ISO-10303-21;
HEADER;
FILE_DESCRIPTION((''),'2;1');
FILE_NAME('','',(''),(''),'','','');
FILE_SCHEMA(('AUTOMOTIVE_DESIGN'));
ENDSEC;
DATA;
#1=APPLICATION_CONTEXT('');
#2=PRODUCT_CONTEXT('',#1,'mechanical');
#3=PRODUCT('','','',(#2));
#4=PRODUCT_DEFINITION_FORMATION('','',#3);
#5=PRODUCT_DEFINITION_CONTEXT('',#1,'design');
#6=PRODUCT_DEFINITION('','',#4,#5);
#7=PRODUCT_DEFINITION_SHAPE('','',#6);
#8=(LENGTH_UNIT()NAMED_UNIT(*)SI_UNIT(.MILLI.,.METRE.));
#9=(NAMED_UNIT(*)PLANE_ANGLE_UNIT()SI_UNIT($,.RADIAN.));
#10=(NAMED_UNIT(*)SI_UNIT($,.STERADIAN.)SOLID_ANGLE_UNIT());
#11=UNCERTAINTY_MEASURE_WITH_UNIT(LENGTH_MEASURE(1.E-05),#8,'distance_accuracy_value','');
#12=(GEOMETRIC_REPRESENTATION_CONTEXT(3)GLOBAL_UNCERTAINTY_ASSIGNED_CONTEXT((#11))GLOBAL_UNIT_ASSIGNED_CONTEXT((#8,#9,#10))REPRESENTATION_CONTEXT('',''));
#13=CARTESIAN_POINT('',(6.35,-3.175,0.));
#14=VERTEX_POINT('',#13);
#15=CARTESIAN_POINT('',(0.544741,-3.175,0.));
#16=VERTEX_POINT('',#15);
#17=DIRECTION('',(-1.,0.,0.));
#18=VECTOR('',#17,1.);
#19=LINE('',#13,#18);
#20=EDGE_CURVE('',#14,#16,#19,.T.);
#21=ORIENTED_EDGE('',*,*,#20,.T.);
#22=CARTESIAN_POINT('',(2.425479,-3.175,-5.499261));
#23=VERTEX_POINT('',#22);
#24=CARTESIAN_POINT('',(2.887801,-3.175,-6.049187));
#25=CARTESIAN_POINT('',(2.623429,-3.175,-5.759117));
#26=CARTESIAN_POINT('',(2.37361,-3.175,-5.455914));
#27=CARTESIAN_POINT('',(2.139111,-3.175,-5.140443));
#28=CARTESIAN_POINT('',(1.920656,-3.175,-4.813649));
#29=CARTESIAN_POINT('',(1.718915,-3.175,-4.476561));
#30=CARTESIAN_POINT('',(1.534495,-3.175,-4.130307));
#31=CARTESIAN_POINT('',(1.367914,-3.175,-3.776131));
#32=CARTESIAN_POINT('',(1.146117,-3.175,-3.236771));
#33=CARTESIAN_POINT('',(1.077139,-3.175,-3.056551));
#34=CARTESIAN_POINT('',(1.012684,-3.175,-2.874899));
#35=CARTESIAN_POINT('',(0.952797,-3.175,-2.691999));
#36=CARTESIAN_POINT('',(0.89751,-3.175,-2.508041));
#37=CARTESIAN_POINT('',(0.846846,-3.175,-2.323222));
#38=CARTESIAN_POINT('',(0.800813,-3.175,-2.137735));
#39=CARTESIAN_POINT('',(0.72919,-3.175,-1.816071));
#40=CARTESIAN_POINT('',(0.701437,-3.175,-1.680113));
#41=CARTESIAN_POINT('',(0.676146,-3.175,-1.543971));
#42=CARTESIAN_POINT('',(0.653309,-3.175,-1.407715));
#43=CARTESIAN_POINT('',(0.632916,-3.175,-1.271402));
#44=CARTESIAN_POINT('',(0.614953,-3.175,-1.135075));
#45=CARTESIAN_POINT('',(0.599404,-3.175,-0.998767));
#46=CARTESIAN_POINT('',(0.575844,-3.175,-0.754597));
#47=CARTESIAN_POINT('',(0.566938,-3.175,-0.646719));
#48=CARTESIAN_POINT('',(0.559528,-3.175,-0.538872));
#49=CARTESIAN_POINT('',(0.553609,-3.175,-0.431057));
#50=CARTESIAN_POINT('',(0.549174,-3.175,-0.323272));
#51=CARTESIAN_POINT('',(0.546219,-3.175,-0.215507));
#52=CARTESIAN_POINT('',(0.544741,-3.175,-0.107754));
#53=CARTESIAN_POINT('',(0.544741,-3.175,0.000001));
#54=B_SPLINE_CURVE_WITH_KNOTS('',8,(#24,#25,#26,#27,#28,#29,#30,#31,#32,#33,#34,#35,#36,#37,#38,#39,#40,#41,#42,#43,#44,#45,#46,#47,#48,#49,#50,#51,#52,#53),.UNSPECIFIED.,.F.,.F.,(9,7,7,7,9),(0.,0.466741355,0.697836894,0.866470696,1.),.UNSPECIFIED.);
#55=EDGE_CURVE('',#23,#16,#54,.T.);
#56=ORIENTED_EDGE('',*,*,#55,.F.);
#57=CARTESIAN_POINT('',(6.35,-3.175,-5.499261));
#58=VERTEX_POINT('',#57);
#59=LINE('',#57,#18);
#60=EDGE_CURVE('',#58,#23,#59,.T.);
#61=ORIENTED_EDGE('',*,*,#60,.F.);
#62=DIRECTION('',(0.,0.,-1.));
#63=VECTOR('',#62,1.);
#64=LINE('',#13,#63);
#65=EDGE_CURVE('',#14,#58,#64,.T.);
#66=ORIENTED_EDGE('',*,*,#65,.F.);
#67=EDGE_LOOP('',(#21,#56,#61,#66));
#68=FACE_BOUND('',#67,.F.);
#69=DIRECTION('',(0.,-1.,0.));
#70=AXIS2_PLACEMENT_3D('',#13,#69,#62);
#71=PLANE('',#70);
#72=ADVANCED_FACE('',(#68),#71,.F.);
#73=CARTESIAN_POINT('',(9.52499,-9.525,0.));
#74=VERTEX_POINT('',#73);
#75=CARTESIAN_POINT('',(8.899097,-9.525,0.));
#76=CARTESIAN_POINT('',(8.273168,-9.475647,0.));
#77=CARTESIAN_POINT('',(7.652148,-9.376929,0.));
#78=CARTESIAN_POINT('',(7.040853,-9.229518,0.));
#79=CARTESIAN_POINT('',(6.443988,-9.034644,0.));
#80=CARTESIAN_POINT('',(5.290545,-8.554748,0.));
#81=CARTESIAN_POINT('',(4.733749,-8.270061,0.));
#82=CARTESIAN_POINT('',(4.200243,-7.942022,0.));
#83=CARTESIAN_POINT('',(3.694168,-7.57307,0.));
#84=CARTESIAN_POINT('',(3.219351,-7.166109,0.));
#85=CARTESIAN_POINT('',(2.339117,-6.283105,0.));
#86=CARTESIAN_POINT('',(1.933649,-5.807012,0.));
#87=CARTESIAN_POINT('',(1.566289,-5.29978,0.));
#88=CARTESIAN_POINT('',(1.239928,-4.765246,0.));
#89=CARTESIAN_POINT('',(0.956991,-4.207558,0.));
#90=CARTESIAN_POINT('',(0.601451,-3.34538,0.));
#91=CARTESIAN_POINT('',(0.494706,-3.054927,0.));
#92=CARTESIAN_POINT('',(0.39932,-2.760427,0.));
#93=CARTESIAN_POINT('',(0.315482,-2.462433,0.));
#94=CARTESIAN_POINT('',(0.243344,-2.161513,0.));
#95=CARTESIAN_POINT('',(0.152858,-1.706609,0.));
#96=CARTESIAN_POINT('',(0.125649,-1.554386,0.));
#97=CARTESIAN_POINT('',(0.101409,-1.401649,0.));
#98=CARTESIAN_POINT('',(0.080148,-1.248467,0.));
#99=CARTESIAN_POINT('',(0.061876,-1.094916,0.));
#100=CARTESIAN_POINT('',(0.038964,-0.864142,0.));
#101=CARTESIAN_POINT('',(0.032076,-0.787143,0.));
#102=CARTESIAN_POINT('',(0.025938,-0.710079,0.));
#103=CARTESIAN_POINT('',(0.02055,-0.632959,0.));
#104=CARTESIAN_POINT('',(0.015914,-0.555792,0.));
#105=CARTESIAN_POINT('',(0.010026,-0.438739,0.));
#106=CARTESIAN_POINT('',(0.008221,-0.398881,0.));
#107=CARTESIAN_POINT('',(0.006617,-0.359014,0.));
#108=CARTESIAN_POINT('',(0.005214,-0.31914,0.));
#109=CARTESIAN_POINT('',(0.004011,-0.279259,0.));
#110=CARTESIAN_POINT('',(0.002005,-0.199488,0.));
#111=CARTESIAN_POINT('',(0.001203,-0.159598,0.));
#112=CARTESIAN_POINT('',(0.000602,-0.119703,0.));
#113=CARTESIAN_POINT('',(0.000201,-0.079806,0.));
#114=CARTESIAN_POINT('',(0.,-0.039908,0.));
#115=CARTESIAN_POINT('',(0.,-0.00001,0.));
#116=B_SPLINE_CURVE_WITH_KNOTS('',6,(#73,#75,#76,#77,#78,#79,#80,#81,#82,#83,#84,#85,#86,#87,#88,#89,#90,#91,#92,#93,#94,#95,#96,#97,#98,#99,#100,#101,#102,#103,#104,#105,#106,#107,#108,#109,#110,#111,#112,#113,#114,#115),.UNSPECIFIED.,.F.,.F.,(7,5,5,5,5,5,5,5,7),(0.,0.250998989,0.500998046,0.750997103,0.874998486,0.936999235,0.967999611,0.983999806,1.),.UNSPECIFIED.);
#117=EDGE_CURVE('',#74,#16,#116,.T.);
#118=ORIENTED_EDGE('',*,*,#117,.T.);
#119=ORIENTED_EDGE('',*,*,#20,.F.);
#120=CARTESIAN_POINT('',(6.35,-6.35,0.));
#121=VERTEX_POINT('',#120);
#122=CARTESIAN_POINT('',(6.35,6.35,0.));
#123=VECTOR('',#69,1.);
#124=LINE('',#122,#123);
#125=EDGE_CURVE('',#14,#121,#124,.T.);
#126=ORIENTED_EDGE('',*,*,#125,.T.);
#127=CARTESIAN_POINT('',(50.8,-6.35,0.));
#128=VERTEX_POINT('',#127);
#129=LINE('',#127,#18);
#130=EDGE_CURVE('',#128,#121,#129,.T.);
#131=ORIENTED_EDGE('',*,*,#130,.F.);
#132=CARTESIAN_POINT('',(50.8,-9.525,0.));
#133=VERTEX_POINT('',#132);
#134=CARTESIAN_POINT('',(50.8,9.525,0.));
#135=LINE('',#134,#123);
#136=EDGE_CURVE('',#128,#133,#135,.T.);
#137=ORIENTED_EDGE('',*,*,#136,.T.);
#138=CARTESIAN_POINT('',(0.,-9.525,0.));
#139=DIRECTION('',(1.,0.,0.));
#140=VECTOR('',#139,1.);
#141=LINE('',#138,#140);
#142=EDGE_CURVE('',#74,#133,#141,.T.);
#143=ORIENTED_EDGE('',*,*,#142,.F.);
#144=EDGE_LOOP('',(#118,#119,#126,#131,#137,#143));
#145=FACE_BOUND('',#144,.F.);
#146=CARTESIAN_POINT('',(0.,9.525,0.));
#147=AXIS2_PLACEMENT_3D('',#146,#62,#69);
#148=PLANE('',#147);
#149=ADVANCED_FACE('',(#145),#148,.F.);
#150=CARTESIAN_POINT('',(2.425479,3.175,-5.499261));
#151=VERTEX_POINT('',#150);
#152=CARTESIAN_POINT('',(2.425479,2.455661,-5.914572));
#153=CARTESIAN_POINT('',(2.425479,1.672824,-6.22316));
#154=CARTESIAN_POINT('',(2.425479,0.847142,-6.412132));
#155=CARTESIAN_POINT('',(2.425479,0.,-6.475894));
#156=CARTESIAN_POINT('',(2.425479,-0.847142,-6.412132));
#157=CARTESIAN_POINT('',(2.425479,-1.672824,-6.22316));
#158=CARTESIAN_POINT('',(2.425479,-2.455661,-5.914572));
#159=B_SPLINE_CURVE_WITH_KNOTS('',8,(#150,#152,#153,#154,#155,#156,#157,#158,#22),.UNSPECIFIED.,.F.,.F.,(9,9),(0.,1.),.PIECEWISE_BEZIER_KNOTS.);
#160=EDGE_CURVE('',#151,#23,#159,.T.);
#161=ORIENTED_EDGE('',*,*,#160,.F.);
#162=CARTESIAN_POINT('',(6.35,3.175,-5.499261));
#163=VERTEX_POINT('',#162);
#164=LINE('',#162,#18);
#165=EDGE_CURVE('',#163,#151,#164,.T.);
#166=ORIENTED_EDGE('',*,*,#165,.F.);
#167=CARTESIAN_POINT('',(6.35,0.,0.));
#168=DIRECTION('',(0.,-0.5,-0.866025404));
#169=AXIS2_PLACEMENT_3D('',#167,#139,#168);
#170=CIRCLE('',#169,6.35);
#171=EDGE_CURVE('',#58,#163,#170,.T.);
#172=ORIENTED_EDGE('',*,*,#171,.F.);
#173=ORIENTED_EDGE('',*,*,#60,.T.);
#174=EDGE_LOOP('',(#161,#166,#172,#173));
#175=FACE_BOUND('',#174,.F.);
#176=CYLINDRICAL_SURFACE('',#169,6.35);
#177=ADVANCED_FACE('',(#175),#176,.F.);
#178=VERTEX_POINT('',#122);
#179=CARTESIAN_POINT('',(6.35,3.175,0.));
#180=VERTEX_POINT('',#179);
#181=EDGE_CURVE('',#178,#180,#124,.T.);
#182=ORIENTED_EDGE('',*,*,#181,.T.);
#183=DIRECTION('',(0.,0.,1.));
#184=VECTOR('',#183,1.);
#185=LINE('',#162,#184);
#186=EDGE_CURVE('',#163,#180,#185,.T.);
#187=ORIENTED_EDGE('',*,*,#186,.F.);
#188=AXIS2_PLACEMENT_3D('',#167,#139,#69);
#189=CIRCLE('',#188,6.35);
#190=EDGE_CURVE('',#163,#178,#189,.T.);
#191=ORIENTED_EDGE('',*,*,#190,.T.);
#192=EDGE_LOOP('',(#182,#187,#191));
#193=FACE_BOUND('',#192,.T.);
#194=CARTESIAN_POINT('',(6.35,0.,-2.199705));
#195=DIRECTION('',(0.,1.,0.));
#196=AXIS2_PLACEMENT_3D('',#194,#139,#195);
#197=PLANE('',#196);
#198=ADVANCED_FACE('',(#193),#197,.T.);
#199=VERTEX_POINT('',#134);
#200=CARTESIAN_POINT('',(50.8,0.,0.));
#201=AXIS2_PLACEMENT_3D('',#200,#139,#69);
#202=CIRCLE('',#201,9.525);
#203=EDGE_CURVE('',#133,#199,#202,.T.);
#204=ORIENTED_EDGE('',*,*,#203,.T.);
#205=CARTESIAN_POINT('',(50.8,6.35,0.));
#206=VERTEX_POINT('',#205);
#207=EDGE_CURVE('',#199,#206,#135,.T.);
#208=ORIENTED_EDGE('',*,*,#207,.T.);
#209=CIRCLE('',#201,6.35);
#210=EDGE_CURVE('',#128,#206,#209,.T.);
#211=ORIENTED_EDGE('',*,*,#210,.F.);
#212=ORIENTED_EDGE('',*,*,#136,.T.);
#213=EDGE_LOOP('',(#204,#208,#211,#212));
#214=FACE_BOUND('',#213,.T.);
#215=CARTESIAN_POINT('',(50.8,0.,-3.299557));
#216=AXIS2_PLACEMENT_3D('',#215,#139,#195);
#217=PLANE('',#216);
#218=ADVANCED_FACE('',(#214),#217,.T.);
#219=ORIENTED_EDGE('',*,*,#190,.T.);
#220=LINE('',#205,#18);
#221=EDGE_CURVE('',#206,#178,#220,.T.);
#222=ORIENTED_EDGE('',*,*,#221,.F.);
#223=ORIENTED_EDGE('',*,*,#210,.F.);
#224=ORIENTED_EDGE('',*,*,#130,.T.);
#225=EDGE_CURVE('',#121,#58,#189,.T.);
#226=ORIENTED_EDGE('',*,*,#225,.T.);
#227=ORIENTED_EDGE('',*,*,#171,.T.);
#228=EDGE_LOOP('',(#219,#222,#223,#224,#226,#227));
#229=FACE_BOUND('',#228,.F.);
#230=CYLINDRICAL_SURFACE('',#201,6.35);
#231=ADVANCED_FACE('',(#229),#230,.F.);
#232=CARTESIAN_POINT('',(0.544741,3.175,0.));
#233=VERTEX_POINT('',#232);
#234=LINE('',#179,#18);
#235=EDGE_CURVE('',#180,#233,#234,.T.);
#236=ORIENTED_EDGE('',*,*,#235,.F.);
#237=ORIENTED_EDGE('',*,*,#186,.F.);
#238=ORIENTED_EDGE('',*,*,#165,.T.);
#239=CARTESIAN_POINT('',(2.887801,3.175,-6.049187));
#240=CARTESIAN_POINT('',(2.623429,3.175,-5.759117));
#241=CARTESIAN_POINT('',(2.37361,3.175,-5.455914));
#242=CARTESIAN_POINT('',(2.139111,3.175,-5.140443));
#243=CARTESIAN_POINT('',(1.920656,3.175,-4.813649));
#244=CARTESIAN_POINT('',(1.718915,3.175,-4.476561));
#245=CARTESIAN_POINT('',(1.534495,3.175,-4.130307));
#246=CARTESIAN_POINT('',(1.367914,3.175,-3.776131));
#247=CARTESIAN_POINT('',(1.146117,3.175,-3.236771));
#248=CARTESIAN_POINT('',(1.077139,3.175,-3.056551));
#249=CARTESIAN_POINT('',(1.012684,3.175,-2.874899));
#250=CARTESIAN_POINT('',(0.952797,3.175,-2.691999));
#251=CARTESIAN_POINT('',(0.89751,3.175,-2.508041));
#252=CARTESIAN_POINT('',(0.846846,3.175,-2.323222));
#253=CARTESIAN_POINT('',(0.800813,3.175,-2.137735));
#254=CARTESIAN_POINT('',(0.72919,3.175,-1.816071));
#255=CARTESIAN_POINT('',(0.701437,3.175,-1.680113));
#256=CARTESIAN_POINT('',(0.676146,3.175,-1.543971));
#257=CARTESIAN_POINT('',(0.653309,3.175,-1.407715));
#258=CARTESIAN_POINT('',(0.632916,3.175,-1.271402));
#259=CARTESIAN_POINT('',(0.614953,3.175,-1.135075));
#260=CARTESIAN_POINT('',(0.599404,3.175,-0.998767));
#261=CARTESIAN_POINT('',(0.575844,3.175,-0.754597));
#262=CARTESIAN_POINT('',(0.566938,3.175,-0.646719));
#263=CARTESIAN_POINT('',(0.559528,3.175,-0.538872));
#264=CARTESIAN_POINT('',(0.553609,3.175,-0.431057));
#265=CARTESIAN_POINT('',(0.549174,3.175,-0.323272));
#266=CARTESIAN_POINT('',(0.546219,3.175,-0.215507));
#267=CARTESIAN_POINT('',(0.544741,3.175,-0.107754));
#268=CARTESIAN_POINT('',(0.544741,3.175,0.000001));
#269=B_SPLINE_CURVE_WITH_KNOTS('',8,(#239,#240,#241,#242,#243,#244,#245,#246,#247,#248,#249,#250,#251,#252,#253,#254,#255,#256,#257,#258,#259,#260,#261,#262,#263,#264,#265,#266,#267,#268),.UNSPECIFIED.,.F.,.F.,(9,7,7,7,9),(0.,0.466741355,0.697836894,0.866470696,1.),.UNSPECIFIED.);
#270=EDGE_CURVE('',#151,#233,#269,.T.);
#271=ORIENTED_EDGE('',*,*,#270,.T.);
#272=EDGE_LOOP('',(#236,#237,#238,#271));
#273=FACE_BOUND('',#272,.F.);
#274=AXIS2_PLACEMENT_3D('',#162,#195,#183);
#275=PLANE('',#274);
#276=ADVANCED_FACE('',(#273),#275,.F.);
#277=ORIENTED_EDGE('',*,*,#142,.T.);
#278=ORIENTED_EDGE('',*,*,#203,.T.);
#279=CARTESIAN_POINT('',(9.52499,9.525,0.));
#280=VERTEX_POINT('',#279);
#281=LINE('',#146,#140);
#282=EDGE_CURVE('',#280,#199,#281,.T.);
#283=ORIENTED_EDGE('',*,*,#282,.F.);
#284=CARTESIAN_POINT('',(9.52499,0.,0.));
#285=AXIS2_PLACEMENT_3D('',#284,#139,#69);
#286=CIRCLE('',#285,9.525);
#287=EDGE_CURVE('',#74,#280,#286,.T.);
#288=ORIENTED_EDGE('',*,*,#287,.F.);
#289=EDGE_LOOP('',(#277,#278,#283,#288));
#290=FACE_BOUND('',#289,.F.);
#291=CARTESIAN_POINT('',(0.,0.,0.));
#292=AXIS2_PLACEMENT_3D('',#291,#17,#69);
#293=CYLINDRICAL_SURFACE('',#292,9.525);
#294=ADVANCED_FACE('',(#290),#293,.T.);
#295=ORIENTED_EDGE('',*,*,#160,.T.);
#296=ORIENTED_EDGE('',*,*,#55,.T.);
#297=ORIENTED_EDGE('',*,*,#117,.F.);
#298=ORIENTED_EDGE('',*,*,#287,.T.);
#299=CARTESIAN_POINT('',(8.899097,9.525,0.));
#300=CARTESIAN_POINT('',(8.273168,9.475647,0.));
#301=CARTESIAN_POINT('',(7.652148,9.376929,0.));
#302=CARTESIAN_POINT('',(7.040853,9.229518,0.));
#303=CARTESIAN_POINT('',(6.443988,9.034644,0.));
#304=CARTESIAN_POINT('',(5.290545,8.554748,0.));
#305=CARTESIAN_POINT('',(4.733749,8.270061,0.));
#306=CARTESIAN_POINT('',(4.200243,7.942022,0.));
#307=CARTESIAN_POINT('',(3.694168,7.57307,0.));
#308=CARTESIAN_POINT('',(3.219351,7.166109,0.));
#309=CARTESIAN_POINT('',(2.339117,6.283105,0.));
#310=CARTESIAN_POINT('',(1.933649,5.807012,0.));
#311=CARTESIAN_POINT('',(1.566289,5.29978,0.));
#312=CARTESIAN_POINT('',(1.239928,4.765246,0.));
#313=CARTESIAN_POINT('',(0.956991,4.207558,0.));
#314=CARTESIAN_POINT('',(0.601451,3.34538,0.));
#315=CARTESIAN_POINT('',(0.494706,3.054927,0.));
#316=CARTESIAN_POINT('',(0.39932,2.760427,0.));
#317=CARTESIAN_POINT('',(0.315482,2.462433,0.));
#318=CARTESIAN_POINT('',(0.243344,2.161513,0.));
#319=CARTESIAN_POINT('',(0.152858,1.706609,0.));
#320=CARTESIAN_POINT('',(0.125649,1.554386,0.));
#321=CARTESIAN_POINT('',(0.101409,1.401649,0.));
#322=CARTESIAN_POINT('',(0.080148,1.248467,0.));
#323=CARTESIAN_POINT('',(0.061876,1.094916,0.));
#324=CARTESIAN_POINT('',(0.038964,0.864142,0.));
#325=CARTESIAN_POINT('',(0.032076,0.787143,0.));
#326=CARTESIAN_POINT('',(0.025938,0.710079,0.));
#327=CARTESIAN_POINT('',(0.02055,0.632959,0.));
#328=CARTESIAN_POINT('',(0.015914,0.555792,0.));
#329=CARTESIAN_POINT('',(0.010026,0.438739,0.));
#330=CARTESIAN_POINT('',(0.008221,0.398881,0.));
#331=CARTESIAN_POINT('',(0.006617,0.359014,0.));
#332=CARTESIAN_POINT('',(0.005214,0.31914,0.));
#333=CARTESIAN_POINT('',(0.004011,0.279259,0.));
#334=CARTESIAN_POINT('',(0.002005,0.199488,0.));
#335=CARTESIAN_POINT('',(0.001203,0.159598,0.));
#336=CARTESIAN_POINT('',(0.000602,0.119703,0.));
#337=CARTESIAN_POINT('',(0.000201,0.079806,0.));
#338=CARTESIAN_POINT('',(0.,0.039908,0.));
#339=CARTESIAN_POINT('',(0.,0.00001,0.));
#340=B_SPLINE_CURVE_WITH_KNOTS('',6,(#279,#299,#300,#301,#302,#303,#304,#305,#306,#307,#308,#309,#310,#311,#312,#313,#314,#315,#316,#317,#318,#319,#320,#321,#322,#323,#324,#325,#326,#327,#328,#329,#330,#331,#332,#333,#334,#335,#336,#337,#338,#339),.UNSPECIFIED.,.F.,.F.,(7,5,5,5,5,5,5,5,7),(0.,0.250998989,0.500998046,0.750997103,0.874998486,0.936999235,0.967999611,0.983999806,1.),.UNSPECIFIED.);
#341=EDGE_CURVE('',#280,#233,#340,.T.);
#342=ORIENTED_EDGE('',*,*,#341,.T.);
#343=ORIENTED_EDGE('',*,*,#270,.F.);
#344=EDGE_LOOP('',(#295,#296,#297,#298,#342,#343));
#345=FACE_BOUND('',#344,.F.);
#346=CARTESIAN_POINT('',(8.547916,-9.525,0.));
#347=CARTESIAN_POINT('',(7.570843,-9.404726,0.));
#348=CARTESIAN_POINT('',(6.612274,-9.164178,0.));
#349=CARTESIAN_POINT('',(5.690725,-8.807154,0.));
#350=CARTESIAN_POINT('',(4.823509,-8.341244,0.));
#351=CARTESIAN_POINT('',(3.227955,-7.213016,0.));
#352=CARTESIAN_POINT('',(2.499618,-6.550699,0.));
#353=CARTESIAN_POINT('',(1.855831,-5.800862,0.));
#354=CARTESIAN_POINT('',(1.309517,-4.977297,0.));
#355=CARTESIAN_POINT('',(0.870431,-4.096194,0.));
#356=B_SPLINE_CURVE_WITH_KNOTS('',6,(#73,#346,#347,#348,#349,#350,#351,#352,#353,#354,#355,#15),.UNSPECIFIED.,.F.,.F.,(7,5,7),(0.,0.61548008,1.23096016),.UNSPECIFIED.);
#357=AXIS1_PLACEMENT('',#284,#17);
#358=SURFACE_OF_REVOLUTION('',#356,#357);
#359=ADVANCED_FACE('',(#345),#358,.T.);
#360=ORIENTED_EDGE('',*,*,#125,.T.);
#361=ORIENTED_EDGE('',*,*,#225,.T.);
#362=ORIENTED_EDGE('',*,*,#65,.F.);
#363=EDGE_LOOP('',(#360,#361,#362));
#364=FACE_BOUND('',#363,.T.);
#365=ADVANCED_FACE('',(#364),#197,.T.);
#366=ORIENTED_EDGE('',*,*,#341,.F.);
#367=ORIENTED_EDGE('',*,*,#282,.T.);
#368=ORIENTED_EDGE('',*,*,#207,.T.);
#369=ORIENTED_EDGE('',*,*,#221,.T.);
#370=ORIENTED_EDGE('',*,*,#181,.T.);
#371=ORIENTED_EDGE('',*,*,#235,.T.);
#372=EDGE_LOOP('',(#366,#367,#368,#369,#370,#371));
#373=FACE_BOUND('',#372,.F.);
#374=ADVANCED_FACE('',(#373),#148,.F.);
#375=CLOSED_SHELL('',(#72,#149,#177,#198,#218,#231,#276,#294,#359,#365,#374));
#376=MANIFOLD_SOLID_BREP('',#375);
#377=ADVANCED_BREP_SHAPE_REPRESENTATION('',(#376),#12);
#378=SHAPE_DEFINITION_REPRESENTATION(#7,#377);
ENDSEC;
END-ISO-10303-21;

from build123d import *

# Parameters (mm, degrees)
F1_DEPTH = 50.8
F2_R     = 9.52499
F4_DEPTH = 44.45
F6_DEPTH = 6.35


# Not quite as in the source:
# - a fillet or chamfer is up to 0.001 mm smaller than in the source, because OpenCascade refuses the exact size


with BuildPart() as f1:
    # F0 (on Right) → F1 (new body)
    with BuildSketch(Plane.YZ):
        with BuildLine():
            Line((9.525, 0), (-9.525, 0))
            ThreePointArc((-9.525, 0), (0, -9.525), (9.525, 0))
        make_face()
    extrude(amount=F1_DEPTH)

    # F2 (radius 9.525 in the source; OpenCascade refuses exactly that, so slightly less here)
    f2_edges = [f1.edges().sort_by_distance(p)[0] for p in [
        (0, 0, -9.525),
    ]]
    fillet(f2_edges, radius=F2_R)

    # F3 (on face) → F4 (cut)
    with BuildSketch(Plane.YZ.offset(50.8)):
        with BuildLine():
            Line((6.35, 0), (-6.35, 0))
            ThreePointArc((-6.35, 0), (0, -6.35), (6.35, 0))
        make_face()
    extrude(amount=-F4_DEPTH, mode=Mode.SUBTRACT)

    # F5 (on face) → F6 (cut)
    with BuildSketch(Plane.YZ.offset(6.35)):
        with BuildLine():
            Line((3.175, 0), (-3.175, 0))
            Line((-3.175, 0), (-3.175, -5.499261314))
            ThreePointArc((-3.175, -5.499261314), (0, -6.35), (3.175, -5.499261314))
            Line((3.175, -5.499261314), (3.175, 0))
        make_face()
    extrude(amount=-F6_DEPTH, mode=Mode.SUBTRACT)


solid = f1.part
